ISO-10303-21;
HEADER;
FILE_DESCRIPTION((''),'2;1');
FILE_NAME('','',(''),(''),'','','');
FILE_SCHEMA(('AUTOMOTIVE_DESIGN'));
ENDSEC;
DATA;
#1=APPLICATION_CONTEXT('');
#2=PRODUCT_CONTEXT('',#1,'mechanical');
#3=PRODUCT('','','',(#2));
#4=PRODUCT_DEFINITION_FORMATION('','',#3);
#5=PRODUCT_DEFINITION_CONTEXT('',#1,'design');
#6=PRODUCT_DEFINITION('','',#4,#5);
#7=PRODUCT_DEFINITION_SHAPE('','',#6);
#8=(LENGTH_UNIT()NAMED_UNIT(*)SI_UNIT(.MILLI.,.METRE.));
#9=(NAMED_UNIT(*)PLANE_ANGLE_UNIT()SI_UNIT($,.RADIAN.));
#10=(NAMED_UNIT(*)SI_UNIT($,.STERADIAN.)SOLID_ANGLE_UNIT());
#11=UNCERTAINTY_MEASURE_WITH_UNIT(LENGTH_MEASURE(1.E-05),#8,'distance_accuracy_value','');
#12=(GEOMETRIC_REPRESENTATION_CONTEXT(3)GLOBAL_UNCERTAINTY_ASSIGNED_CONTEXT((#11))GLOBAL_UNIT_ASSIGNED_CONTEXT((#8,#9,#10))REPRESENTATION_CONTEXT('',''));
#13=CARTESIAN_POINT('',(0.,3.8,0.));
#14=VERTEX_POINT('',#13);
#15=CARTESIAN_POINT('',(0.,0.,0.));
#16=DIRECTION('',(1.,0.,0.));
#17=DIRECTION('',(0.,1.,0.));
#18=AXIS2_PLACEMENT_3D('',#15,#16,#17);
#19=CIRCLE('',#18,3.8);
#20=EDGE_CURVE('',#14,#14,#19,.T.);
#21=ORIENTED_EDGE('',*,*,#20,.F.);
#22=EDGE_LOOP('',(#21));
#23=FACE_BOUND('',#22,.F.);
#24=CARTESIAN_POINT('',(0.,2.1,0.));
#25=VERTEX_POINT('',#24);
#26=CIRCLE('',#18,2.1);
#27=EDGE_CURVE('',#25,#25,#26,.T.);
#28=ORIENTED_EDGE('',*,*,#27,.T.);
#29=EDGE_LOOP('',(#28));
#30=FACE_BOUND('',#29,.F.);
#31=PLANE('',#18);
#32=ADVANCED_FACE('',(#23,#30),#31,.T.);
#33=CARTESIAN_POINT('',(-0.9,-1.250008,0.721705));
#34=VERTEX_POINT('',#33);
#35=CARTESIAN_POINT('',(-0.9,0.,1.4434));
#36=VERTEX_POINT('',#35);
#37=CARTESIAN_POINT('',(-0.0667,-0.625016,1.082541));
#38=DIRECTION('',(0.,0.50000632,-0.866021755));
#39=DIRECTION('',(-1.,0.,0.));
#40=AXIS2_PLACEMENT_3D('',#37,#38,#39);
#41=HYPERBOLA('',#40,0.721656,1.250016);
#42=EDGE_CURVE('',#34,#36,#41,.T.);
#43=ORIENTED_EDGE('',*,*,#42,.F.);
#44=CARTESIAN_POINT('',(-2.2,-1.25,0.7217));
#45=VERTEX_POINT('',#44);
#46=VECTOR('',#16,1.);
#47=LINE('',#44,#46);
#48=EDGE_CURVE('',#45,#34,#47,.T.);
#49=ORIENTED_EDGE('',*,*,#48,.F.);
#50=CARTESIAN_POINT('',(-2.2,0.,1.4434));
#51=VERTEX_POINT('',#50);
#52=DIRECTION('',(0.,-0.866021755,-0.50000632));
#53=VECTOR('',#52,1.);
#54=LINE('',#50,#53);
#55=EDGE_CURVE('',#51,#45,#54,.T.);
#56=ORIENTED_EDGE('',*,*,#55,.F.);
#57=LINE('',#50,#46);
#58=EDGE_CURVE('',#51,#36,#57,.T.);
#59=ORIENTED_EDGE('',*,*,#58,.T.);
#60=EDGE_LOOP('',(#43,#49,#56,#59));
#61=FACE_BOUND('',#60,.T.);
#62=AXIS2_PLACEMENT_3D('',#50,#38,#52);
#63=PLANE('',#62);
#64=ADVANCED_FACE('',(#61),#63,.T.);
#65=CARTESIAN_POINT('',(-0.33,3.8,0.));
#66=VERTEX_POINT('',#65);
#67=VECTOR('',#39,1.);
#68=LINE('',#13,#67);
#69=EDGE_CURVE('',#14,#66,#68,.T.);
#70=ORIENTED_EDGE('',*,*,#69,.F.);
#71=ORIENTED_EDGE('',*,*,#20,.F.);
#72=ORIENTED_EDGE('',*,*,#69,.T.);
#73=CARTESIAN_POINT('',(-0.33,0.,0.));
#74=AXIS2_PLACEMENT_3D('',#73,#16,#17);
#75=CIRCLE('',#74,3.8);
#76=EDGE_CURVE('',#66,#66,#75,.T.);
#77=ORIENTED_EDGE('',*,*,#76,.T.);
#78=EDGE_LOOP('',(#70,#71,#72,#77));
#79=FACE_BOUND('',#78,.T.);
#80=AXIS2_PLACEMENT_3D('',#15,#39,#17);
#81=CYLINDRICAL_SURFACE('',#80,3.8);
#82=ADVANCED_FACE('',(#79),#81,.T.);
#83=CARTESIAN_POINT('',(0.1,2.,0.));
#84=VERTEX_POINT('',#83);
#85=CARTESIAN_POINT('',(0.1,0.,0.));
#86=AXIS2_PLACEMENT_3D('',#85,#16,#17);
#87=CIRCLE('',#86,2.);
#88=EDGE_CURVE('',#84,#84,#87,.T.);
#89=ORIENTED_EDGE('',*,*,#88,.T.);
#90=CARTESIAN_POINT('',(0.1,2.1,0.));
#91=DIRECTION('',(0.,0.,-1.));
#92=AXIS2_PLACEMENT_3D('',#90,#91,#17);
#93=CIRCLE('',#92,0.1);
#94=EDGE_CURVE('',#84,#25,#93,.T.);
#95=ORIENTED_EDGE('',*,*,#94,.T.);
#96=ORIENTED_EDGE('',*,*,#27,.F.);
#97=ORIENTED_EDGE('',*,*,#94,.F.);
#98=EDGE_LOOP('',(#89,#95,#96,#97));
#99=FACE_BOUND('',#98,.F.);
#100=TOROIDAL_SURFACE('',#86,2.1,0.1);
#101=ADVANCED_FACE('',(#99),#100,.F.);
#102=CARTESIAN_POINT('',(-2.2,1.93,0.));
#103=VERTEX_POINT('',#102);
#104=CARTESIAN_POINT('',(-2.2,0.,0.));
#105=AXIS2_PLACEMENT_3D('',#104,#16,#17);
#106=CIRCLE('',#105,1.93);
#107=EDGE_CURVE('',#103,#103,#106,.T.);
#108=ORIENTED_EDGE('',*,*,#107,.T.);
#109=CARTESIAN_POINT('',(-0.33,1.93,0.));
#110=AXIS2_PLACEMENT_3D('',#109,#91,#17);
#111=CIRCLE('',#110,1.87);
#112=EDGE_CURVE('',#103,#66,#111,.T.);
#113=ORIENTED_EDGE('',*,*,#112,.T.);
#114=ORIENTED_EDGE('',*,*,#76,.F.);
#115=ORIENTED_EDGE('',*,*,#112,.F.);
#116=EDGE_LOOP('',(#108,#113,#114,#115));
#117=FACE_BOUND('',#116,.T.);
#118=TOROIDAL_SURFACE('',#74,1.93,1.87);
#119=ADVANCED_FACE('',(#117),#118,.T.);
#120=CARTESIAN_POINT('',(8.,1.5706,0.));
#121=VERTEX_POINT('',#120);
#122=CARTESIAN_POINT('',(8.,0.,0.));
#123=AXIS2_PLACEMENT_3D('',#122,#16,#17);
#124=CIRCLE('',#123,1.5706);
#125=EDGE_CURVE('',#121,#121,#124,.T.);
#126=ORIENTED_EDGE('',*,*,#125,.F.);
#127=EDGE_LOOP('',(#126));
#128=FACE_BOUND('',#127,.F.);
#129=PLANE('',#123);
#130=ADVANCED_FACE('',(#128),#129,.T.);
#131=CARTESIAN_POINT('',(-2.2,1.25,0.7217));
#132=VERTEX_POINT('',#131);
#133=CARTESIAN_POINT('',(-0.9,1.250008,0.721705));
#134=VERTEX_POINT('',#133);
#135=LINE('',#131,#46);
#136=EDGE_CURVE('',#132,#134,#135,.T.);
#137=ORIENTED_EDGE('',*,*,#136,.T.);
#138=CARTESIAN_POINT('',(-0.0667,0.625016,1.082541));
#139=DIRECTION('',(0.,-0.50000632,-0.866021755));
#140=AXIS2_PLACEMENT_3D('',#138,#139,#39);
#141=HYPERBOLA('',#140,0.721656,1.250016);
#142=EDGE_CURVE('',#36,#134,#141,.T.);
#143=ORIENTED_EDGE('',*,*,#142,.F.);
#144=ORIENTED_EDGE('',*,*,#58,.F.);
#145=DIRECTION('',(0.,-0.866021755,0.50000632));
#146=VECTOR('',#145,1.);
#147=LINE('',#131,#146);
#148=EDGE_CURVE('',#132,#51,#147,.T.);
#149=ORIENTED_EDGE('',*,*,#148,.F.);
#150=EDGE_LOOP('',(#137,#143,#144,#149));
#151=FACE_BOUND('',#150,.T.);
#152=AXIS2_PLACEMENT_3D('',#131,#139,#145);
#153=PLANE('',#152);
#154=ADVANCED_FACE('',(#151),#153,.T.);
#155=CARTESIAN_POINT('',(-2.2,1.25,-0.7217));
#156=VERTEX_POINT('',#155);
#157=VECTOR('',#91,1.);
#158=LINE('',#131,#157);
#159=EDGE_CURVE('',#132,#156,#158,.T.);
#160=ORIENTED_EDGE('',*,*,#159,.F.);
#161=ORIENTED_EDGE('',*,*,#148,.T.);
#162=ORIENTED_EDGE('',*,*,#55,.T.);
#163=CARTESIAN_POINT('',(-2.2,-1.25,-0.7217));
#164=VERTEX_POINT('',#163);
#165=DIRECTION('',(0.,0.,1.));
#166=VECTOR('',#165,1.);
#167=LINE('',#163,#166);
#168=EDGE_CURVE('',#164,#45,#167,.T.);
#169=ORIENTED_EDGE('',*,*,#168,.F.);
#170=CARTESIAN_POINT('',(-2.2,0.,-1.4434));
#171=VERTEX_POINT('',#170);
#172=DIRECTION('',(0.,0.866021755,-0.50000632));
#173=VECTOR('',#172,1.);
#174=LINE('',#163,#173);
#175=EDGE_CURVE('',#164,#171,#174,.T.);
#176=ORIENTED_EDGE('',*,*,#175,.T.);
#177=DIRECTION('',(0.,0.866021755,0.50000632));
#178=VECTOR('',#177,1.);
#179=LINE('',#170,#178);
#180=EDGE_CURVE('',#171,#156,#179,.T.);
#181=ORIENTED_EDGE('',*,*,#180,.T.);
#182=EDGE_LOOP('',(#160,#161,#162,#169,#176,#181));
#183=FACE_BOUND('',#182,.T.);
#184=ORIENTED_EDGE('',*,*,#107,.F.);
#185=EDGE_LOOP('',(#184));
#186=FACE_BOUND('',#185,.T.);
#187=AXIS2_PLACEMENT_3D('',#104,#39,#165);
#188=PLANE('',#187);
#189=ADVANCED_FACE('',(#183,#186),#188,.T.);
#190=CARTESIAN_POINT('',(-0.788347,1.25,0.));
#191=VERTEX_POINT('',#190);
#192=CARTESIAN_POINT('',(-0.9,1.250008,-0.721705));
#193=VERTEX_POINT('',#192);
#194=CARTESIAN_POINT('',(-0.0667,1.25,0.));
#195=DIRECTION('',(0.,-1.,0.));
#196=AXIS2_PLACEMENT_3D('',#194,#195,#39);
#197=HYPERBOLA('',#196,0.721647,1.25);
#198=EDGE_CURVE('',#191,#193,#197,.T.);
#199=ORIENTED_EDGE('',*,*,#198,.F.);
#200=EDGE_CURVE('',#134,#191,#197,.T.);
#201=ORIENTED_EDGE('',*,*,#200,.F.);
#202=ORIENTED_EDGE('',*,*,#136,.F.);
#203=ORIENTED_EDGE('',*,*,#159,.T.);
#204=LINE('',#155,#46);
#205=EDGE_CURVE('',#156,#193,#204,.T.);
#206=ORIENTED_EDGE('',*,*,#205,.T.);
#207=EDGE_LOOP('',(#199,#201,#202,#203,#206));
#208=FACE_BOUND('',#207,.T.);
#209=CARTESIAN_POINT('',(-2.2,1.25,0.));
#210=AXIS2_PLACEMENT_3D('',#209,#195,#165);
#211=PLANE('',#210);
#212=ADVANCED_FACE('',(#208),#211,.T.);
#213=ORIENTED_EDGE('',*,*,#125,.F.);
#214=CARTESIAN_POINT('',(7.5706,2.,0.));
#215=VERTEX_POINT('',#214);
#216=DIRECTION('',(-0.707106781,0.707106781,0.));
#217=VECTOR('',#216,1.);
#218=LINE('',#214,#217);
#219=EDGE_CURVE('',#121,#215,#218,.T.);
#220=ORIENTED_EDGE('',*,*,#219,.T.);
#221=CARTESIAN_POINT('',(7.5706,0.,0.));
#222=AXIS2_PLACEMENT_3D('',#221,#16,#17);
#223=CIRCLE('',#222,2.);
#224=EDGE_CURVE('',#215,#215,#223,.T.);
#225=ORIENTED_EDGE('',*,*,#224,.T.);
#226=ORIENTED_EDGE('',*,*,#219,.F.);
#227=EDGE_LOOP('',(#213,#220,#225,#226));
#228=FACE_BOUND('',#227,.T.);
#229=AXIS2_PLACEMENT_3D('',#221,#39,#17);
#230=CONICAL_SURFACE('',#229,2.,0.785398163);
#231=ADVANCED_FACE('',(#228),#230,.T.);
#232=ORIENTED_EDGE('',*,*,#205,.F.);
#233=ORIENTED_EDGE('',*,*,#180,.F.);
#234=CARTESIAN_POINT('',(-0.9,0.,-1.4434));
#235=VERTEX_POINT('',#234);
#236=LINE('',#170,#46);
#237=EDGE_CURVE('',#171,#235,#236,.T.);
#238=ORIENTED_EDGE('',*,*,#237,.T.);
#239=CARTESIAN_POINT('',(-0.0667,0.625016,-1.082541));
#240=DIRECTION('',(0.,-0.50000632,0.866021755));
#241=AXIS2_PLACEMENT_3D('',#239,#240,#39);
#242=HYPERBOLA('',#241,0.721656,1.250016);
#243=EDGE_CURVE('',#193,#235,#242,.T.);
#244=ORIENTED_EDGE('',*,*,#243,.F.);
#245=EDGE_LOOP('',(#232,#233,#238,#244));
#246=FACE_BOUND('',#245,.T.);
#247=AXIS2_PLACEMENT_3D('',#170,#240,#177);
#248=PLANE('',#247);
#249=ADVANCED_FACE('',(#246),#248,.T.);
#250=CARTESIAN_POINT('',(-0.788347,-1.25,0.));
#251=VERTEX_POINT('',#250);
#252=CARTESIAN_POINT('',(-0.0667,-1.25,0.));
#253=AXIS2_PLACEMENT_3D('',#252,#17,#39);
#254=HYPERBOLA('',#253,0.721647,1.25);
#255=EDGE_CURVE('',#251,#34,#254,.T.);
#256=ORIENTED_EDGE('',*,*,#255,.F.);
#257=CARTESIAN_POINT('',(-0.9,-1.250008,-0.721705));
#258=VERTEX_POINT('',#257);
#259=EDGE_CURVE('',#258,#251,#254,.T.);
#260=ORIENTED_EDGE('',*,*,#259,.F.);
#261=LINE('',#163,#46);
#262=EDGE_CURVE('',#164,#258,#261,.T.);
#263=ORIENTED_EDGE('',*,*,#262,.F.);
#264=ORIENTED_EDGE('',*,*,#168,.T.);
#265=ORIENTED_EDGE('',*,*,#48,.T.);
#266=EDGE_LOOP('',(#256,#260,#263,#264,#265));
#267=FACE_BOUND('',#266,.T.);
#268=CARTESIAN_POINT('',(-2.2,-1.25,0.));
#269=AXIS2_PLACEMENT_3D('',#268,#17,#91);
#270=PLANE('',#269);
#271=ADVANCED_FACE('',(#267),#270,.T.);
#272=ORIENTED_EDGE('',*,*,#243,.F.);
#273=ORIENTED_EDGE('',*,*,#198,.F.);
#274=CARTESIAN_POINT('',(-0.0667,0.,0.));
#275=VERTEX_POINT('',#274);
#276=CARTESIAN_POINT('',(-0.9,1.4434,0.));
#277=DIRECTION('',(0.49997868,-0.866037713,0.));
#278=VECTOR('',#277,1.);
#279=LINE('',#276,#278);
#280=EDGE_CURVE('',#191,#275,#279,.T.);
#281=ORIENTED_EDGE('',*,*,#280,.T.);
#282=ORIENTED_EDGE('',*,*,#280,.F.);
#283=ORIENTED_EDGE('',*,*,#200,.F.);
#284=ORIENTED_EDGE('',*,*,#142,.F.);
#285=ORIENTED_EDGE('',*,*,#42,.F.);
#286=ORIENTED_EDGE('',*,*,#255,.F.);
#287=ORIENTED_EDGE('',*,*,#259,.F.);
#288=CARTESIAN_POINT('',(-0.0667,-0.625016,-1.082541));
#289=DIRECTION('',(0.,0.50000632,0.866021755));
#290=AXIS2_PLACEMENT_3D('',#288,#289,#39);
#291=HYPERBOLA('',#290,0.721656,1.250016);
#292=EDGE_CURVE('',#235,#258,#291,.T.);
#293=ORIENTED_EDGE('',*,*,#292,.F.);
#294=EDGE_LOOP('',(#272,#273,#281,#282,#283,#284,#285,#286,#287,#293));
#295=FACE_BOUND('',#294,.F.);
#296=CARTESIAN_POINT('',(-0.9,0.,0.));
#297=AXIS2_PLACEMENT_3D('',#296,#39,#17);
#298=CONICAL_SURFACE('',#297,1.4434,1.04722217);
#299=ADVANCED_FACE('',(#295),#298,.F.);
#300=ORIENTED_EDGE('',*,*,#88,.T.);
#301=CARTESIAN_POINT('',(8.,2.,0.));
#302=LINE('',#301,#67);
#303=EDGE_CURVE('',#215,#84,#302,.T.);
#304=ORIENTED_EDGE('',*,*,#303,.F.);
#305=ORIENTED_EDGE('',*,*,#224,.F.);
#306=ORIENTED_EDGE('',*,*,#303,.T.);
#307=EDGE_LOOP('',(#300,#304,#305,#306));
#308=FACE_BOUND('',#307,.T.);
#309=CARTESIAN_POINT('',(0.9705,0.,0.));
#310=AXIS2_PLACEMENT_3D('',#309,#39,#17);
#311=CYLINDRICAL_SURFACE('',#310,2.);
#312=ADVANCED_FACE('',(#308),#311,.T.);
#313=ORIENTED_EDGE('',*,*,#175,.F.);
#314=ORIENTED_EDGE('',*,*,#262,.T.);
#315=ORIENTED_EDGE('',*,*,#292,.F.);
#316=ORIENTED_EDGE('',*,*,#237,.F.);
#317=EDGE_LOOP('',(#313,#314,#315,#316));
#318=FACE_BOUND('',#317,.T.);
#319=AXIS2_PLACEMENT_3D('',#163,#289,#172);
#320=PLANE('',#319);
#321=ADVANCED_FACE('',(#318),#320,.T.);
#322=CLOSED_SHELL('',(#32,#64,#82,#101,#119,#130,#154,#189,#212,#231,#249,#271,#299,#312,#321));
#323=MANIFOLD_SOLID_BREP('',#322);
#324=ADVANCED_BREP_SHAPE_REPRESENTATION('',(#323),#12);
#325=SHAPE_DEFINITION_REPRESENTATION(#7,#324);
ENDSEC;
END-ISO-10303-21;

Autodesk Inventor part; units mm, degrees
ref_plane "YZ Plane" through (0, 0, 0) normal (1, 0, 0) x (0, 1, 0)
ref_plane "XZ Plane" through (0, 0, 0) normal (0, 1, 0) x (-1, 0, 0)
sketch "Эскиз1" plane through (0, 0, 0) normal (0, 0, 1) x (1, 0, 0)
  line L0 (-0.0667, 0) -> (8, 0)
  line L1 (8, 0) -> (8, 2)
  line L2 (8, 2) -> (1.4, 2)
  line L3 (1.4, 2) -> (0.9705, 2)
  line L4 (0.9705, 2) -> (0, 2)
  line L5 (0, 2) -> (0, 3.8)
  line L6 (0, 3.8) -> (-2.2, 3.8)
  line L7 (-2.2, 3.8) -> (-2.2, 1.4434)
  line L8 (-2.2, 1.4434) -> (-0.9, 1.4434)
  line L9 (-0.9, 1.4434) -> (-0.0667, 0)
  line L10 (-4.24, 0) -> (10.04, 0) projected
  line L11 (0, -0.76) -> (0, 4.56) projected
  line L12 (1.4, 2) -> (0, 2) construction
  dimension "d1" = 6.6
  dimension "d2" = 0.4295
  dimension "d3" = 2.2
  dimension "d4" = 1.3
  dimension "d5" = 60
  dimension "d6" = 4
  dimension "d7" = 4
  dimension "d8" = 2.8868
  dimension "d9" = 7.6
  dimension "d26" = 8
revolve "Базовый элемент" add sketch "Эскиз1" angle 360 about axis through (-0.0667, 0, 0) along (1, 0, 0)
sketch "Эскиз2" plane through (-2.2, 0, 0) normal (-1, 0, 0) x (0, 0, 1)
  circle A0 centre (0, 0) radius 1.4434 projected
  line L0 (0, -5.32) -> (0, 5.32) projected
  line L1 (-5.32, 0) -> (5.32, 0) projected
  line L2 (1.4434, 0) -> (0.7217, -1.25)
  line L3 (0.7217, -1.25) -> (-0.7217, -1.25)
  line L4 (-0.7217, -1.25) -> (-1.4434, 0)
  line L5 (-1.4434, 0) -> (-0.7217, 1.25)
  line L6 (-0.7217, 1.25) -> (0.7217, 1.25)
  line L7 (0.7217, 1.25) -> (1.4434, 0)
  point P0 (0, 0)
extrude "Паз" add sketch "Эскиз2" against normal up to next contours L7 A0 | A0 L2 | L6 L0 A0 | A0 L0 L3 | L0 L6 A0 | A0 L3 L0 | L4 A0 | A0 L5
fillet "Сопряжение1" radius 1.87 1 edges at (-2.2, -3.8, 0)
thread "Резьба" size "M4x0.7" class "6g" standard "ISO Metric profile" length 6.6
chamfer "Фаска1" distance 0.4294 distance2 0.4294 1 edges at (8, -2, 0) measured on face at (8, 0.556, 0.0273)
ref_plane "Work Plane1" through (29, 0, 0) normal (0, -1, 0) x (1, 0, 0)
fillet "Fillet2" radius 0.1 1 edges at (0, -2, 0)
equation "\"d1\" = GEL"
equation "\"d3\" = KOH"
equation "\"d4\" = INTI"
equation "\"d6\" = GD"
equation "\"d7\" = BDM"
equation "\"d8\" = 1.1547 * SW"
equation "\"d9\" = KOD"
equation "\"d26\" = NLG"
equation "\"d30\" = R"
equation "\"d17\" = RR"
equation "\"d13\" = GEL"
equation "\"d15\" = -0.5 * SPD + 0.5 * GD"
equation "\"d16\" = GUL"
equation "\"GD\" = NND"
equation "\"NLG\" = 8"
equation "\"GEL\" = 6.6"
equation "\"KOD\" = 7.6"
equation "\"KOH\" = 2.2"
equation "\"INTI\" = 1.3"
equation "\"GAL\" = 0.61345 * PTC"
equation "\"GUL\" = 0.61345 * PTC"
equation "\"BDM\" = NND"
equation "\"SW\" = 2.5"
equation "\"RR\" = 1.87"
equation "\"SPD\" = 3.14117"
equation "\"R\" = 0.1"
equation "\"TOA\" = 30deg"
equation "\"GD1\" = THREADDIA - 1.2269 * PTC"
equation "\"THREADDIA\" = 4"
equation "\"PTC\" = 0.7"
equation "\"NND\" = 4"
equation "\"E0\" = 2.87"
properties part number "JIS B 1174 - M4 x 8" material "Сталь, мягкая"
